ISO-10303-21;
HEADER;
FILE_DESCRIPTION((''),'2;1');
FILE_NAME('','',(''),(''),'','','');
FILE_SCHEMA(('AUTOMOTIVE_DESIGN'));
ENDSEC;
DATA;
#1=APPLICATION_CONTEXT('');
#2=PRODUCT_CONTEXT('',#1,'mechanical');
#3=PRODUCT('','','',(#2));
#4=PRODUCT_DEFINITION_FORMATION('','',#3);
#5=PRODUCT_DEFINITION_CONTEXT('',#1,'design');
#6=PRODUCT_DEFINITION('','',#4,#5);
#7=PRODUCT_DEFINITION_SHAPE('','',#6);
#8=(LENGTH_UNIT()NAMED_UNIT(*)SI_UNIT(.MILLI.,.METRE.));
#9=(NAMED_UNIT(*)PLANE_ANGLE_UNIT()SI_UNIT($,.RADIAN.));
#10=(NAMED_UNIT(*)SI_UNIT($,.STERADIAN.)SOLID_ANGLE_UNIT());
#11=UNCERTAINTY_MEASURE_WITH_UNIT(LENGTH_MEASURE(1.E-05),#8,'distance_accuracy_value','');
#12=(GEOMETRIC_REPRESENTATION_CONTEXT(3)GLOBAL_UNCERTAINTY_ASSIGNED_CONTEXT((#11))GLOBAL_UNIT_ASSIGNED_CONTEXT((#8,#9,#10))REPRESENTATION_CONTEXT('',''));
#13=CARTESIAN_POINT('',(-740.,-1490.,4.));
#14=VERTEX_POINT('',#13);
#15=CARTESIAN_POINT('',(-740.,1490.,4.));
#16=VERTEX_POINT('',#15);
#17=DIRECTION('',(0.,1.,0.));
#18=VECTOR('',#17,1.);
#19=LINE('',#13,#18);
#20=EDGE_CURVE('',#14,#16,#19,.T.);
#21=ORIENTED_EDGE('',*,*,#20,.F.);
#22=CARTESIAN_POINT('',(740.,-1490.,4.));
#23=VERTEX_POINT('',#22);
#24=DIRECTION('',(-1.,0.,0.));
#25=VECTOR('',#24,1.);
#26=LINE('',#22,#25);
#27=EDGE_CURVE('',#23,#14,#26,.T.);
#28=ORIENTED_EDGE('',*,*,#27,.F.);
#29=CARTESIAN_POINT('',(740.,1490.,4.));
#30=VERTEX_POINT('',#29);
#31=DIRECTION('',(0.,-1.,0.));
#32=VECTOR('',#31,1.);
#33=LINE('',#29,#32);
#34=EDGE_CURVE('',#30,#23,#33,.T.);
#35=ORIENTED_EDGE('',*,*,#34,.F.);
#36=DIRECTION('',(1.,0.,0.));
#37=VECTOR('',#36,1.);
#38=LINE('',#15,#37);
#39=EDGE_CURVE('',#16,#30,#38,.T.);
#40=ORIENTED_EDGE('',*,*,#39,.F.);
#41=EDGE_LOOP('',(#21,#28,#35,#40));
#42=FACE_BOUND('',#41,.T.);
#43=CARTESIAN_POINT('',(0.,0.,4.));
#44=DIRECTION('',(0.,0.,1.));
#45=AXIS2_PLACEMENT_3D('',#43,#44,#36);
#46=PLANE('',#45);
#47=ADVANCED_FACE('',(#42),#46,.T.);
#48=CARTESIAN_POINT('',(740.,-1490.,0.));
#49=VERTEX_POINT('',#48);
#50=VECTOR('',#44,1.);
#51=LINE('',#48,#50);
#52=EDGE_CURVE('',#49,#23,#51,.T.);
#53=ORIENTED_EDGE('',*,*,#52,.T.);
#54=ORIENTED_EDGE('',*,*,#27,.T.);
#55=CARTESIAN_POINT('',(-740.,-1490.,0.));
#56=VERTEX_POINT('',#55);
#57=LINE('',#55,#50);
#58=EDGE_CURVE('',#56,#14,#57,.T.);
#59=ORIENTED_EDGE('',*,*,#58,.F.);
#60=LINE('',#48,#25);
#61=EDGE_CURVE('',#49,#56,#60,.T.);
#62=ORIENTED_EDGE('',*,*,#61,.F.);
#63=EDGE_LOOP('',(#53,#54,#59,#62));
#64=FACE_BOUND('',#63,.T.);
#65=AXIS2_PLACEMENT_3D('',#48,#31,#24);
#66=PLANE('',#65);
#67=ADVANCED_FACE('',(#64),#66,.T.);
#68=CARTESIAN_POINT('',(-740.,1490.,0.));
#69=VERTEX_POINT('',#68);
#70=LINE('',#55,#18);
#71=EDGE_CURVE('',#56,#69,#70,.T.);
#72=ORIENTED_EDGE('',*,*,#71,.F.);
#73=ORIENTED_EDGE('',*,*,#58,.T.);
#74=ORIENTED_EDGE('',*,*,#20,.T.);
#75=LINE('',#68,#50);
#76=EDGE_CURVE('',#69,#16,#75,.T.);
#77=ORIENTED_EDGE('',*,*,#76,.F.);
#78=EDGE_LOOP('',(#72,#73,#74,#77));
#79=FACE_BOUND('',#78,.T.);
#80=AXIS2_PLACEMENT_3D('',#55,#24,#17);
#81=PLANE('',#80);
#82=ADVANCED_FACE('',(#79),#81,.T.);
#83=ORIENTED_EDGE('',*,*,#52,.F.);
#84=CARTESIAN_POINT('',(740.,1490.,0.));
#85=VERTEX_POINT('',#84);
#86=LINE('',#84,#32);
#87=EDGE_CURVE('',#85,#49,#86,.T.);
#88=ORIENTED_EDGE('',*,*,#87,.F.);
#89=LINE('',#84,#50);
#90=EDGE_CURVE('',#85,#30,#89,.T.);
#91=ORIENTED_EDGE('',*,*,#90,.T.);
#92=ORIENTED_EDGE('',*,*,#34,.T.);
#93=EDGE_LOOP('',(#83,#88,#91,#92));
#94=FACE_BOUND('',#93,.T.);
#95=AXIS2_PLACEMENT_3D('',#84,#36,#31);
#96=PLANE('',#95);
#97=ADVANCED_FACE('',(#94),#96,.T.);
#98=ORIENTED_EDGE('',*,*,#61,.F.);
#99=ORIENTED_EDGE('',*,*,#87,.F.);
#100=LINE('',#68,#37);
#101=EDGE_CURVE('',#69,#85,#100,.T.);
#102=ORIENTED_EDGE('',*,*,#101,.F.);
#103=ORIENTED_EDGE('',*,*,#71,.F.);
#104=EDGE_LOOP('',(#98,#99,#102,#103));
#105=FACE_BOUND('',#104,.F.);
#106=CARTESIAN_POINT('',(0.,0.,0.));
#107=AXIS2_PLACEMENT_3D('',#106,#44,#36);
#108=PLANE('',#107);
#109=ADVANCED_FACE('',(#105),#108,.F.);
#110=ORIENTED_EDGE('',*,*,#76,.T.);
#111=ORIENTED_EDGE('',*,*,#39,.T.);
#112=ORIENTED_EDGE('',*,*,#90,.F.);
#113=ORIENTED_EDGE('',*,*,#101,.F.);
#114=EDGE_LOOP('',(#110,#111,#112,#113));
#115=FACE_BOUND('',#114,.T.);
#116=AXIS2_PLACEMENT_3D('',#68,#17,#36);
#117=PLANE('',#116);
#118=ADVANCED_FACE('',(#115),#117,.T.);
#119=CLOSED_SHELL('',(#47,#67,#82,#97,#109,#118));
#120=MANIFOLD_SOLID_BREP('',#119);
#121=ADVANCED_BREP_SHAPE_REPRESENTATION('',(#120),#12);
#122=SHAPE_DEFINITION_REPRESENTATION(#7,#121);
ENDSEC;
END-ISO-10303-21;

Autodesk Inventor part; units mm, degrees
ref_plane "YZ Plane" through (0, 0, 0) normal (1, 0, 0) x (0, 1, 0)
ref_plane "XZ Plane" through (0, 0, 0) normal (0, 1, 0) x (-1, 0, 0)
ref_plane "XY Plane" through (0, 0, 0) normal (0, 0, 1) x (1, 0, 0)
sketch "Sketch1" plane through (0, 0, 0) normal (0, 0, 1) x (1, 0, 0)
  line L0 (740, -1490) -> (-740, -1490)
  line L1 (-740, -1490) -> (-740, 1490)
  line L2 (-740, 1490) -> (740, 1490)
  line L3 (740, 1490) -> (740, -1490)
  line L4 (740, -1490) -> (-740, 1490) construction
  line L5 (-740, -1490) -> (740, 1490) construction
  point P0 (0, 0)
  dimension "d0" = 1480
  dimension "d1" = 2980
extrude "Plate1" add sketch "Sketch1" along normal blind 4
sketch "Эскиз5" plane through (0, 0, 0) normal (0, 0, -1) x (-1, 0, 0)
  line L0 (568.231, -1317.5249) -> (568.231, -1815.661) construction
  line L1 (568.231, -1815.661) -> (528.6037, -1815.661) construction
  line L2 (528.6037, -1815.661) -> (528.6037, -1317.5249) construction
  line L3 (528.6037, -1317.5249) -> (568.231, -1317.5249) construction
  line L4 (669.2463, -1238) -> (669.2463, -1335) projected
  line L5 (669.2463, -1335) -> (665.2463, -1335) projected
  line L6 (169.3732, -1238) -> (169.3732, -1335) projected
  line L7 (169.3732, -1335) -> (165.3732, -1335) projected
  line L8 (-330.5, -1238) -> (-330.5, -1335) projected
  line L9 (-330.5, -1335) -> (-334.5, -1335) projected
  line L10 (669.2463, 1460.5) -> (669.2463, 1520.5) projected
  line L11 (669.2463, 1460.5) -> (665.2463, 1460.5) projected
  line L12 (169.3732, 1460.5) -> (169.3732, 1520.5) projected
  line L13 (169.3732, 1460.5) -> (165.3732, 1460.5) projected
  line L14 (-330.5, 1460.5) -> (-330.5, 1520.5) projected
  line L15 (-330.5, 1460.5) -> (-334.5, 1460.5) projected
  line L16 (709.6246, -1234.5) -> (769.6246, -1234.5) projected
  line L17 (709.6246, -1234.5) -> (709.6246, -1230.5) projected
  line L18 (709.6246, -737.8333) -> (769.6246, -737.8333) projected
  line L19 (709.6246, -737.8333) -> (709.6246, -733.8333) projected
  line L20 (709.6246, -241.1667) -> (769.6246, -241.1667) projected
  line L21 (709.6246, -241.1667) -> (709.6246, -237.1667) projected
  line L22 (709.6246, 255.5) -> (769.6246, 255.5) projected
  line L23 (709.6246, 255.5) -> (709.6246, 259.5) projected
  line L24 (709.6246, 752.1667) -> (769.6246, 752.1667) projected
  line L25 (709.6246, 752.1667) -> (709.6246, 756.1667) projected
  line L26 (709.6246, 1248.8333) -> (769.6246, 1248.8333) projected
  line L27 (709.6246, 1248.8333) -> (709.6246, 1252.8333) projected
  line L28 (-740, -1234.5) -> (-710, -1234.5) projected
  line L29 (-710, -1234.5) -> (-710, -1230.5) projected
  line L30 (-740, -737.8333) -> (-710, -737.8333) projected
  line L31 (-710, -737.8333) -> (-710, -733.8333) projected
  line L32 (-740, -241.1667) -> (-710, -241.1667) projected
  line L33 (-710, -241.1667) -> (-710, -237.1667) projected
  line L34 (-740, 255.5) -> (-710, 255.5) projected
  line L35 (-710, 255.5) -> (-710, 259.5) projected
  line L36 (-740, 752.1667) -> (-710, 752.1667) projected
  line L37 (-710, 752.1667) -> (-710, 756.1667) projected
  line L38 (-740, 1248.8333) -> (-710, 1248.8333) projected
  line L39 (-710, 1248.8333) -> (-710, 1252.8333) projected
  point P0 (0, 0)
mark "Маркировка4"
equation "\"d0\" = Лист_ширина"
equation "\"d2\" = Thickness"
equation "\"BendRadius\" = Thickness"
equation "\"BendReliefWidth\" = Thickness"
equation "\"BendReliefDepth\" = 0.5 * Thickness"
equation "\"CornerReliefSize\" = 4 * Thickness"
equation "\"MinimumRemnant\" = 2 * Thickness"
equation "\"TransitionRadius\" = BendRadius"
equation "\"JacobiRadiusSize\" = BendRadius"
equation "\"GapSize\" = Thickness"
equation "\"Лист_ширина\" = 1480"
equation "\"Thickness\" = 4"
properties part number "GBK 3122 shield 2" material "Steel"
